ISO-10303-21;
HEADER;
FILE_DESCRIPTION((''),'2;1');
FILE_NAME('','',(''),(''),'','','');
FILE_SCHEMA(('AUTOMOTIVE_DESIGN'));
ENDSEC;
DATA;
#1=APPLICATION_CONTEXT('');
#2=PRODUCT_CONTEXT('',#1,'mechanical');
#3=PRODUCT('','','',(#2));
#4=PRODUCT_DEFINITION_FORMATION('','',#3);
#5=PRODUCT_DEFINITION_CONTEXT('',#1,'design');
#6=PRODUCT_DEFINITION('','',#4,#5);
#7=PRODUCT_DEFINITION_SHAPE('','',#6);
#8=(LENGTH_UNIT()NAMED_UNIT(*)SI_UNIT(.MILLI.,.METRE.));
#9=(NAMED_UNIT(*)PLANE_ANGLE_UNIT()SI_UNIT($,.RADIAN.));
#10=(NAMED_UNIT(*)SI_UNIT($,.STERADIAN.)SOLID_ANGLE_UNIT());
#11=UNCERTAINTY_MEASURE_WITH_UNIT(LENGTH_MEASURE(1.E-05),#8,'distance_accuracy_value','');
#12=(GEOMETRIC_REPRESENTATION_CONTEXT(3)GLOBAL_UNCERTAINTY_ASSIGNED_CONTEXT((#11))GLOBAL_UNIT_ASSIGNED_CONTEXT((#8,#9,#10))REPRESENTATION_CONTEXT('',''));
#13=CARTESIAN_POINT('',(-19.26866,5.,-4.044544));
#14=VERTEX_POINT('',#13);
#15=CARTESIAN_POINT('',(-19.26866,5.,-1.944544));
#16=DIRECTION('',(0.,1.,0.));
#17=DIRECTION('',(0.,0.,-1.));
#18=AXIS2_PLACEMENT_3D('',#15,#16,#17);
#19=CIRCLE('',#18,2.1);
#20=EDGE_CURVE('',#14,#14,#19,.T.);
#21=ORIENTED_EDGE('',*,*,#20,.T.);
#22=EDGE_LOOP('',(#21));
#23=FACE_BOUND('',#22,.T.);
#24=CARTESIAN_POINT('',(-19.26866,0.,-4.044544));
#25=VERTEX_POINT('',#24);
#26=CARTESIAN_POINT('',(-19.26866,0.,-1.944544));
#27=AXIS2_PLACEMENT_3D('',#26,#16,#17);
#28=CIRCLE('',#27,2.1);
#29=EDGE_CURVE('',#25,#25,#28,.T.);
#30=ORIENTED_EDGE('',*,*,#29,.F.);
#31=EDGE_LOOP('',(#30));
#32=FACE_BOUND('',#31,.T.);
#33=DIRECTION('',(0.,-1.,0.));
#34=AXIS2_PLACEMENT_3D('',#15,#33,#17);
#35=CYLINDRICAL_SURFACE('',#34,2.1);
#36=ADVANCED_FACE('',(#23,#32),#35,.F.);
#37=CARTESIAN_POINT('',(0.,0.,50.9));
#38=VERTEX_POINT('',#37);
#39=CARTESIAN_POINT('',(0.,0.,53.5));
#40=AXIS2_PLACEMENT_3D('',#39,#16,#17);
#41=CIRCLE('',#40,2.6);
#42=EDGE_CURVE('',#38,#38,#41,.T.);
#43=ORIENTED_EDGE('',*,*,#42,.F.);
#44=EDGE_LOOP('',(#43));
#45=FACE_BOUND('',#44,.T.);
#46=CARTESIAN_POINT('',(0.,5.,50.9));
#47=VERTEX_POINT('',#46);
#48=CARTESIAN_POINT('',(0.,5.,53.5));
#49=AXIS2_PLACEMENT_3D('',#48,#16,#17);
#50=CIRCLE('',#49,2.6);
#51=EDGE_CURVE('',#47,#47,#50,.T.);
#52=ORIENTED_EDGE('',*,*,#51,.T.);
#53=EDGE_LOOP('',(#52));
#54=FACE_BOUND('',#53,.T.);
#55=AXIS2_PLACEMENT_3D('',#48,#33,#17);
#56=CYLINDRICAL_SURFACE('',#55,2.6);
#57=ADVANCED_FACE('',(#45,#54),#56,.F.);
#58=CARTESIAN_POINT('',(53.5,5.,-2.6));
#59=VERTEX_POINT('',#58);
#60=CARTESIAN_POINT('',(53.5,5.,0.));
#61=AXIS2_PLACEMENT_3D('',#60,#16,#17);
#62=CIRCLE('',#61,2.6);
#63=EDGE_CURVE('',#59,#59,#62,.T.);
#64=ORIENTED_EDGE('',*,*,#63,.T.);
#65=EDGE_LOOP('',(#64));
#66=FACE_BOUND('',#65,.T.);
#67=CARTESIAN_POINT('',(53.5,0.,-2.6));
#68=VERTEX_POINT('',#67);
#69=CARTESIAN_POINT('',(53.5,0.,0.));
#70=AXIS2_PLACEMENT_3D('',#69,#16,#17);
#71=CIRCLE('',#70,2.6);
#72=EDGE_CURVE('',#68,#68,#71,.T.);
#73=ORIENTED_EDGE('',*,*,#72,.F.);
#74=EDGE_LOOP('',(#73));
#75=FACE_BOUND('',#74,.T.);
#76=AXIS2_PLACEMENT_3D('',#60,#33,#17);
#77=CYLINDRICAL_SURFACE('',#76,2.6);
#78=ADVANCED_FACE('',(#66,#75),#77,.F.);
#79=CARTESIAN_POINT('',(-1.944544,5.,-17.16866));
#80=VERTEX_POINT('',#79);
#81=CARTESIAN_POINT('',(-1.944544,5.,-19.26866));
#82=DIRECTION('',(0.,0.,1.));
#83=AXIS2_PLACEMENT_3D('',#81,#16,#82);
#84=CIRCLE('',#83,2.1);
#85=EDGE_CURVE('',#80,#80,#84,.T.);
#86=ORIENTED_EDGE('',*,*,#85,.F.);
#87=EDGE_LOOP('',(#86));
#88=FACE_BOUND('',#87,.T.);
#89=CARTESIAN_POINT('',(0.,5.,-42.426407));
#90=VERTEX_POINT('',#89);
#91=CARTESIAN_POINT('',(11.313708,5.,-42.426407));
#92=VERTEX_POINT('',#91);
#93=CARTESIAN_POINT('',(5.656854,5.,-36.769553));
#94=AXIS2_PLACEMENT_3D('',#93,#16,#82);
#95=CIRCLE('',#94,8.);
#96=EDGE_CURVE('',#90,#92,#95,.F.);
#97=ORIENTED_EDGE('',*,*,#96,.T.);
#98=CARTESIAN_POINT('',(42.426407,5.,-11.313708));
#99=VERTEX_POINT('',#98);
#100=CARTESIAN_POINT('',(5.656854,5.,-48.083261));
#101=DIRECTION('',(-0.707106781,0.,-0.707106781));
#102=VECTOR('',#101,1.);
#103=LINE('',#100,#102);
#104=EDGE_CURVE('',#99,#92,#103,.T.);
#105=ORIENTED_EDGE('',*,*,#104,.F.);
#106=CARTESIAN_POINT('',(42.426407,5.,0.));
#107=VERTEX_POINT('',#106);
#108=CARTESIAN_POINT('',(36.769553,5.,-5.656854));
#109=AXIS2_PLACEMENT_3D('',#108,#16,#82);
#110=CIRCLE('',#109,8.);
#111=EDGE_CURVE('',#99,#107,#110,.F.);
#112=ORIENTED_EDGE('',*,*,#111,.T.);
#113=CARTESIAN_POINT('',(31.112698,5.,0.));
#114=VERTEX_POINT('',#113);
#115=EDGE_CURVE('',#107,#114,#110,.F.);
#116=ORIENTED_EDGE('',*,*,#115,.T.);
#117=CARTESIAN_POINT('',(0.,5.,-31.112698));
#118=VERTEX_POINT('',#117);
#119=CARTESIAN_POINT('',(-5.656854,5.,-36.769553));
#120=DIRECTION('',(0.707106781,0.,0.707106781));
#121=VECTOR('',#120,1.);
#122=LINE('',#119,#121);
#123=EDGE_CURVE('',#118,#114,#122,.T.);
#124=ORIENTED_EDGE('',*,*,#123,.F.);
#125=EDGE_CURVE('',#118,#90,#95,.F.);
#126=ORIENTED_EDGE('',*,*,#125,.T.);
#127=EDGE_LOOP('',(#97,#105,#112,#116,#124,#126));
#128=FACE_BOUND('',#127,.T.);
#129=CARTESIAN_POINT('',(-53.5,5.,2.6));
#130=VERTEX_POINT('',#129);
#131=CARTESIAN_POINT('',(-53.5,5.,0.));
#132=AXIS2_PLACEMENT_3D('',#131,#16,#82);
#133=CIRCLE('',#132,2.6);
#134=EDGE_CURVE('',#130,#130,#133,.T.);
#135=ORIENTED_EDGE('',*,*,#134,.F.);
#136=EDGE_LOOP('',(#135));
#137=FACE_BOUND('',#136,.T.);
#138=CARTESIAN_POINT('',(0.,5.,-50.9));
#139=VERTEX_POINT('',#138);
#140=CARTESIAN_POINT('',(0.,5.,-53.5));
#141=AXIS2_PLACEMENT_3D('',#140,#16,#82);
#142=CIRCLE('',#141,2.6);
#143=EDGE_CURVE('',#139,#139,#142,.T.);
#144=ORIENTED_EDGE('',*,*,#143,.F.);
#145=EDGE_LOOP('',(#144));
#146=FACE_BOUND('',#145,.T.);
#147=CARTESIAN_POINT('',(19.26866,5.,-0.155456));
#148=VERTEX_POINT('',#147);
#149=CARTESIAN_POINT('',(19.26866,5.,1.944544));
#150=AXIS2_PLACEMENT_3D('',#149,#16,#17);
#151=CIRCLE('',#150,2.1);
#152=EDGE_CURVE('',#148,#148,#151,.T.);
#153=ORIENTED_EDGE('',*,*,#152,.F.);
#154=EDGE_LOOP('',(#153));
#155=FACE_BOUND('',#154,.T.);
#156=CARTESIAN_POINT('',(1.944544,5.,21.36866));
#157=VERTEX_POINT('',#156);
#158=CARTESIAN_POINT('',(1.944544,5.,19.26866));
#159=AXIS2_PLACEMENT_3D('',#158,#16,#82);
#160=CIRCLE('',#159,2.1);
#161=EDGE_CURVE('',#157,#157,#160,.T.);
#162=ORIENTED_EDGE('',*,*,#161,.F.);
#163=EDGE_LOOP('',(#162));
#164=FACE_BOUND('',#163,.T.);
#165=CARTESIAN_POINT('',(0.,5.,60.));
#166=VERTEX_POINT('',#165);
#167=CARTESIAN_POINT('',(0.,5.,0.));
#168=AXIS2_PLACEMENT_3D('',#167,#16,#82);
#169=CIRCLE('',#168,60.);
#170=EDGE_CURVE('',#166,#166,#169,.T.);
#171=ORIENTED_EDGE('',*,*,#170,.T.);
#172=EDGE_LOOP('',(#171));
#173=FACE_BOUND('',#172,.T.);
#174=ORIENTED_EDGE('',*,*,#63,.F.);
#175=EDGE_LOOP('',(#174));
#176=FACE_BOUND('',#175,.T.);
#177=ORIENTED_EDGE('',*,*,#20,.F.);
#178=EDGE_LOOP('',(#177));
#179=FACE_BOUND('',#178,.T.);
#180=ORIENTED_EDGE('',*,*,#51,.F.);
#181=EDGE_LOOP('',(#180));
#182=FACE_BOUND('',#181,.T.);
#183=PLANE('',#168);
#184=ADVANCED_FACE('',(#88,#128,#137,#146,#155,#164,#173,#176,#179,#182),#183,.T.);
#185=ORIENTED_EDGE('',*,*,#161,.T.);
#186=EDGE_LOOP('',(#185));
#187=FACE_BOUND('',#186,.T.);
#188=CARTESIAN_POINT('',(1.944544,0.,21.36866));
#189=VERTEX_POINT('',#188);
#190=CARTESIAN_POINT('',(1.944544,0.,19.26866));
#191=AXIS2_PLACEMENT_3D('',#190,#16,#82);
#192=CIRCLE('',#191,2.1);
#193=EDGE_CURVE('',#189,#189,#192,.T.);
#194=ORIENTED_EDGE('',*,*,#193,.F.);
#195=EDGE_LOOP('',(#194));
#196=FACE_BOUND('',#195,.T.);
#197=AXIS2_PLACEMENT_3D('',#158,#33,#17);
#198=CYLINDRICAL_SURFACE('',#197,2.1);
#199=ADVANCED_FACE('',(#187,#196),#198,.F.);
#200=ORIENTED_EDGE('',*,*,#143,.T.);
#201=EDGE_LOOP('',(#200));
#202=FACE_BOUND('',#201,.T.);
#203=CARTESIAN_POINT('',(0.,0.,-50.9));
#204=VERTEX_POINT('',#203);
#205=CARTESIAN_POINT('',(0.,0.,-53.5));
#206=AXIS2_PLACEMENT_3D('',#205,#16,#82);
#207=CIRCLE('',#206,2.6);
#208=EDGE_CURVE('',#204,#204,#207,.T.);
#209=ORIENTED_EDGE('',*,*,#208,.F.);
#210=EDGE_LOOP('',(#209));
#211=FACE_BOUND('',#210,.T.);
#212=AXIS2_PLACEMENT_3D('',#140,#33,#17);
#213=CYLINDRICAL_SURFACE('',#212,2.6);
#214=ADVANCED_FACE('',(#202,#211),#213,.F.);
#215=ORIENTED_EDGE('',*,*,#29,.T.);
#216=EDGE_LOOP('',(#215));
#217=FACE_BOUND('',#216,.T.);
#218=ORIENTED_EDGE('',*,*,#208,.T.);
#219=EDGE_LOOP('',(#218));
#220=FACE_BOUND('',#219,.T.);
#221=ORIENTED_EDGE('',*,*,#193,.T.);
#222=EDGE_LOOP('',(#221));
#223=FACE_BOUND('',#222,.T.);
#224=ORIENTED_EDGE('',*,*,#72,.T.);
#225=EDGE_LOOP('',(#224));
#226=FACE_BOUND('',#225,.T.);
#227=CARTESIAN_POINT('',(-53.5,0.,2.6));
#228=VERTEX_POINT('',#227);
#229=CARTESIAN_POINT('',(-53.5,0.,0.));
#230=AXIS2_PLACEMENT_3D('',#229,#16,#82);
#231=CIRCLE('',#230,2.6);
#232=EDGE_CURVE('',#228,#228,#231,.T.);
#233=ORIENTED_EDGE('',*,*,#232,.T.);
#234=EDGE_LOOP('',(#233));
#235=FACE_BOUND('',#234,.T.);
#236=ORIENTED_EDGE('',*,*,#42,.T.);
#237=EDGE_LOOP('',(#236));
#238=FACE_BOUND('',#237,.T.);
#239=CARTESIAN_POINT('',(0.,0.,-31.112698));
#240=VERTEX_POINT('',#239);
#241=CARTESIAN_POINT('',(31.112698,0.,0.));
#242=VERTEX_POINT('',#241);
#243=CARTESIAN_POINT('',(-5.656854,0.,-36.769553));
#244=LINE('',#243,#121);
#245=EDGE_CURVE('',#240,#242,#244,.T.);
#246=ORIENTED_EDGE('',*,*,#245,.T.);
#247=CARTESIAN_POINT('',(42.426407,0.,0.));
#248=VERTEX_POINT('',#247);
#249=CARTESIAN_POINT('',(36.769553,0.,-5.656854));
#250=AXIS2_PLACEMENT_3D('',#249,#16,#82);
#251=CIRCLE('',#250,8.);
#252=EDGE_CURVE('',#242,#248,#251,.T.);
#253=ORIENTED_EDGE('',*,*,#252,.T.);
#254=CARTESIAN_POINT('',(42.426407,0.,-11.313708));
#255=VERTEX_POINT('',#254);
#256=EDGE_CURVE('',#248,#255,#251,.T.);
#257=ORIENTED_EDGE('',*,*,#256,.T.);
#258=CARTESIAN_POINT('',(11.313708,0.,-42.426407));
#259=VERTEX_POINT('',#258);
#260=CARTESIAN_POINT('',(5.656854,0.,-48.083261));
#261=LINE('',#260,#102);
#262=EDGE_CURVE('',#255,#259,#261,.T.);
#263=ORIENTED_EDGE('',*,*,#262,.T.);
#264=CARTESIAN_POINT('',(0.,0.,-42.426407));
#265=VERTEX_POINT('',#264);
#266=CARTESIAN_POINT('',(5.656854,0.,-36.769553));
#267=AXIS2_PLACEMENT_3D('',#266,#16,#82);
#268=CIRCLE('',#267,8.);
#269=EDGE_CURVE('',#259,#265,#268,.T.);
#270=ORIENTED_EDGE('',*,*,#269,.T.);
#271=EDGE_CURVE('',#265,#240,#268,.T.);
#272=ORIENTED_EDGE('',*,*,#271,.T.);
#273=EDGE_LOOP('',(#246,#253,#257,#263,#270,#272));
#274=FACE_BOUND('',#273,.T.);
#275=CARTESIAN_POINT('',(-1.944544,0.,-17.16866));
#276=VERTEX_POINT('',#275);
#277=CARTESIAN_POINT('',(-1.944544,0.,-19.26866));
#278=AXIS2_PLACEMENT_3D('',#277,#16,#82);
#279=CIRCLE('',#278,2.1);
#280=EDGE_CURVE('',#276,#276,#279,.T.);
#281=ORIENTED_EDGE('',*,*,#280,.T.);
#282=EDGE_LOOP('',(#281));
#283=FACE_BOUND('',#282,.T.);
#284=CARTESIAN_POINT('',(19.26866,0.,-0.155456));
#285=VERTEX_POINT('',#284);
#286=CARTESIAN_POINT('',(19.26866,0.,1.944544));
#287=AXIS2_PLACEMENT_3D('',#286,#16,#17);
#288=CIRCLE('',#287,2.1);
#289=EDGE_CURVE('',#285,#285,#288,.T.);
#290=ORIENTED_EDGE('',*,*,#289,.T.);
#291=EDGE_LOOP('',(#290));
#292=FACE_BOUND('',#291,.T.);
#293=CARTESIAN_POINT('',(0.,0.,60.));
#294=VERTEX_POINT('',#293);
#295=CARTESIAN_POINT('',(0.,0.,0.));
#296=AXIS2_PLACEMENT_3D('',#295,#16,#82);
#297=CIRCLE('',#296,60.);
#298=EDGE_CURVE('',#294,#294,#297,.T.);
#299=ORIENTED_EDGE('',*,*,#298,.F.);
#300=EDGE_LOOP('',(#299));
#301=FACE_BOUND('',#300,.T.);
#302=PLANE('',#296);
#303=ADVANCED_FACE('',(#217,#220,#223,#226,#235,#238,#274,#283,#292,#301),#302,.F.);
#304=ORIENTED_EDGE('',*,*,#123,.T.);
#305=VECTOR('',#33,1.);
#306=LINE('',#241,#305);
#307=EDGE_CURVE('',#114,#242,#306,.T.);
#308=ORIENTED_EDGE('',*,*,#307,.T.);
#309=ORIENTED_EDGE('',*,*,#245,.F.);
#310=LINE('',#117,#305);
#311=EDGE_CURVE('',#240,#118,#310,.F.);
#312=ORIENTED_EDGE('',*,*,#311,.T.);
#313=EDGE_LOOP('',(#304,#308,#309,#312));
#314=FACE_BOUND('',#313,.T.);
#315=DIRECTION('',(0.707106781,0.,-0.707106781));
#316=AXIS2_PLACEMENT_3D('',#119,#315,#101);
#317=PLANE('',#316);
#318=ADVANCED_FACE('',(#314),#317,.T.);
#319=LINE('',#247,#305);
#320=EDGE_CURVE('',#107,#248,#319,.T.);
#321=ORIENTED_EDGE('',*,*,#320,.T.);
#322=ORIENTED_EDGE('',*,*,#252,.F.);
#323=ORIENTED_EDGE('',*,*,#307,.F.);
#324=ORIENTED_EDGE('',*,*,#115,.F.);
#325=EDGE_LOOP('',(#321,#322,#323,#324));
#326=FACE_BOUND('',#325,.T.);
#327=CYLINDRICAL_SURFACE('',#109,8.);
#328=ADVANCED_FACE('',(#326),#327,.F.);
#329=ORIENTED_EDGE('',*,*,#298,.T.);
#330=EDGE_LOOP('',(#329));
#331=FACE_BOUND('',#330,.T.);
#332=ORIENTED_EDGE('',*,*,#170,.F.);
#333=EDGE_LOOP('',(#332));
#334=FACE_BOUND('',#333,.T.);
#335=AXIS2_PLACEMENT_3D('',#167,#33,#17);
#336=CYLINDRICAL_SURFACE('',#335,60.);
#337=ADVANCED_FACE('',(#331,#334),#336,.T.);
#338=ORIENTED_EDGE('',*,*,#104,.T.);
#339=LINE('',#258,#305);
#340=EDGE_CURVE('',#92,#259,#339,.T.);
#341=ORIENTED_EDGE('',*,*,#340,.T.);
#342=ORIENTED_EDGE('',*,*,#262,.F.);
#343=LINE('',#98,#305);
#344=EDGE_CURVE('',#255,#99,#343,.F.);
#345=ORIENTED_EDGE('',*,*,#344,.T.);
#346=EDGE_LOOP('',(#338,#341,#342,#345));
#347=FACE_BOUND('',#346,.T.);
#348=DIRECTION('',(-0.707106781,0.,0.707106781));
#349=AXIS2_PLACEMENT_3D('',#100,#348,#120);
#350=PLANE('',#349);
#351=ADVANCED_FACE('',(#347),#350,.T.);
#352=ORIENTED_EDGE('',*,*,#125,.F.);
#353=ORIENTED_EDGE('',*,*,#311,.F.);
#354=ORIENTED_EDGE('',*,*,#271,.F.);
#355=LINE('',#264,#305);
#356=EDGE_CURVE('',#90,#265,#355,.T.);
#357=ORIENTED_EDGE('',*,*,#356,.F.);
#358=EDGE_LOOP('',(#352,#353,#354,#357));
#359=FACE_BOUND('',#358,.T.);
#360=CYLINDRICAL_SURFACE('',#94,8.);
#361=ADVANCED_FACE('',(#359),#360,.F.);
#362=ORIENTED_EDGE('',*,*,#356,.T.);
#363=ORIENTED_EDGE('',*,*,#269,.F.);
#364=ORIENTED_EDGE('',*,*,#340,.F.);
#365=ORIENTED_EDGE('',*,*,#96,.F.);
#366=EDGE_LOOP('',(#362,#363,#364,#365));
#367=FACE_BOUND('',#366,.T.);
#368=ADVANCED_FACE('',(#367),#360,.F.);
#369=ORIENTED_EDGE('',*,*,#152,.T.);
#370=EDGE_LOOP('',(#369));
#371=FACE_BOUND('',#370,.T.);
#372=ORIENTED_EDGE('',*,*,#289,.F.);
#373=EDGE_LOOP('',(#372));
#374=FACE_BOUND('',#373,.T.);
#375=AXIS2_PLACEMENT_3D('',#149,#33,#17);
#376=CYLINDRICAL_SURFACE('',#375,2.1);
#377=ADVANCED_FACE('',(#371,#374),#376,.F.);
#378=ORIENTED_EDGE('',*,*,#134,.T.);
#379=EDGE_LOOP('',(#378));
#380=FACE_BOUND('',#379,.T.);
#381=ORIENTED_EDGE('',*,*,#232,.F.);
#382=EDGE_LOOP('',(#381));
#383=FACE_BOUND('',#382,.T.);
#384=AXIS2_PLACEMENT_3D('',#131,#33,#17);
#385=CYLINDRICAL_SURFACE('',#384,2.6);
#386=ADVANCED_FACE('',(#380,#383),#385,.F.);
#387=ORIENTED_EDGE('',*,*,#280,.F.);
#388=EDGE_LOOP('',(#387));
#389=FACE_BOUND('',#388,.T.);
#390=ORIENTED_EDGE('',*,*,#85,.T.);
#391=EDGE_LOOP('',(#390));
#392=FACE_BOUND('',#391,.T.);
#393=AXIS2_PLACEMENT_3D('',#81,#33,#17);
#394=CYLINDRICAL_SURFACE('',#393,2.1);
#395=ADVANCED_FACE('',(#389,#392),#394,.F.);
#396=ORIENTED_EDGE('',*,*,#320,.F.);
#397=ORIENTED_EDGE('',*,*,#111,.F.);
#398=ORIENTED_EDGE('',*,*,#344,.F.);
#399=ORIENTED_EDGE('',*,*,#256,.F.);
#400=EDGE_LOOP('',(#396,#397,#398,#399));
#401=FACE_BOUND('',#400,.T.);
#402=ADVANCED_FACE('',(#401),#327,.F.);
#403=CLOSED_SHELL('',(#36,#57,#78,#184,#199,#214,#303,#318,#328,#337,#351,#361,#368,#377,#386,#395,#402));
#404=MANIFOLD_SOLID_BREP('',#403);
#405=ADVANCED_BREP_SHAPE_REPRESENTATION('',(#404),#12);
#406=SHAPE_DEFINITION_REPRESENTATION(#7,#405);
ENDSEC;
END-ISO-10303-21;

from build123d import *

# Parameters (mm, degrees)
SKETCH_1_R      = 60
SKETCH_1_R_2    = 2.6
SKETCH_1_R_3    = 2.1
EXTRUDE_1_DEPTH = 5
FILLET_1_R      = 8


with BuildPart() as part:
    # 草图1 → 凸台-拉伸1 (new body)
    with BuildSketch(Plane(origin=(0, 0, 0), x_dir=(1, 0, 0), z_dir=(0, 1, 0))):
        with Locations(Location((0, 0, 0), (0, 0, 270))):
            Circle(SKETCH_1_R)
        with Locations(Location((0, 53.5, 0), (0, 0, 270))):
            Circle(SKETCH_1_R_2, mode=Mode.SUBTRACT)
        with Locations(Location((53.5, 0, 0), (0, 0, 90))):
            Circle(SKETCH_1_R_2, mode=Mode.SUBTRACT)
        with Locations(Location((0, -53.5, 0), (0, 0, 90))):
            Circle(SKETCH_1_R_2, mode=Mode.SUBTRACT)
        with Locations(Location((-53.5, 0, 0), (0, 0, 270))):
            Circle(SKETCH_1_R_2, mode=Mode.SUBTRACT)
        with Locations(Location((-1.944543648, 19.268659787, 0), (0, 0, 270))):
            Circle(SKETCH_1_R_3, mode=Mode.SUBTRACT)
        with Locations(Location((19.268659787, -1.944543648, 0), (0, 0, 90))):
            Circle(SKETCH_1_R_3, mode=Mode.SUBTRACT)
        with Locations(Location((1.944543648, -19.268659787, 0), (0, 0, 270))):
            Circle(SKETCH_1_R_3, mode=Mode.SUBTRACT)
        with Locations(Location((-19.268659787, 1.944543648, 0), (0, 0, 90))):
            Circle(SKETCH_1_R_3, mode=Mode.SUBTRACT)
        Polygon((-5.656854249, 36.769552622), (36.769552622, -5.656854249), (48.083261121, 5.656854249), (5.656854249, 48.083261121), align=None, mode=Mode.SUBTRACT)
    extrude(amount=EXTRUDE_1_DEPTH)

    # 圆角1
    fillet_1_edges = [part.edges().sort_by_distance(p)[0] for p in [
        (36.769552622, 2.5, 5.656854249),
        (48.083261121, 2.5, -5.656854249),
        (5.656854249, 2.5, -48.083261121),
        (-5.656854249, 2.5, -36.769552622),
    ]]
    fillet(fillet_1_edges, radius=FILLET_1_R - 0.0001)  # a hair under: the kernel refuses the full size


solid = part.part
